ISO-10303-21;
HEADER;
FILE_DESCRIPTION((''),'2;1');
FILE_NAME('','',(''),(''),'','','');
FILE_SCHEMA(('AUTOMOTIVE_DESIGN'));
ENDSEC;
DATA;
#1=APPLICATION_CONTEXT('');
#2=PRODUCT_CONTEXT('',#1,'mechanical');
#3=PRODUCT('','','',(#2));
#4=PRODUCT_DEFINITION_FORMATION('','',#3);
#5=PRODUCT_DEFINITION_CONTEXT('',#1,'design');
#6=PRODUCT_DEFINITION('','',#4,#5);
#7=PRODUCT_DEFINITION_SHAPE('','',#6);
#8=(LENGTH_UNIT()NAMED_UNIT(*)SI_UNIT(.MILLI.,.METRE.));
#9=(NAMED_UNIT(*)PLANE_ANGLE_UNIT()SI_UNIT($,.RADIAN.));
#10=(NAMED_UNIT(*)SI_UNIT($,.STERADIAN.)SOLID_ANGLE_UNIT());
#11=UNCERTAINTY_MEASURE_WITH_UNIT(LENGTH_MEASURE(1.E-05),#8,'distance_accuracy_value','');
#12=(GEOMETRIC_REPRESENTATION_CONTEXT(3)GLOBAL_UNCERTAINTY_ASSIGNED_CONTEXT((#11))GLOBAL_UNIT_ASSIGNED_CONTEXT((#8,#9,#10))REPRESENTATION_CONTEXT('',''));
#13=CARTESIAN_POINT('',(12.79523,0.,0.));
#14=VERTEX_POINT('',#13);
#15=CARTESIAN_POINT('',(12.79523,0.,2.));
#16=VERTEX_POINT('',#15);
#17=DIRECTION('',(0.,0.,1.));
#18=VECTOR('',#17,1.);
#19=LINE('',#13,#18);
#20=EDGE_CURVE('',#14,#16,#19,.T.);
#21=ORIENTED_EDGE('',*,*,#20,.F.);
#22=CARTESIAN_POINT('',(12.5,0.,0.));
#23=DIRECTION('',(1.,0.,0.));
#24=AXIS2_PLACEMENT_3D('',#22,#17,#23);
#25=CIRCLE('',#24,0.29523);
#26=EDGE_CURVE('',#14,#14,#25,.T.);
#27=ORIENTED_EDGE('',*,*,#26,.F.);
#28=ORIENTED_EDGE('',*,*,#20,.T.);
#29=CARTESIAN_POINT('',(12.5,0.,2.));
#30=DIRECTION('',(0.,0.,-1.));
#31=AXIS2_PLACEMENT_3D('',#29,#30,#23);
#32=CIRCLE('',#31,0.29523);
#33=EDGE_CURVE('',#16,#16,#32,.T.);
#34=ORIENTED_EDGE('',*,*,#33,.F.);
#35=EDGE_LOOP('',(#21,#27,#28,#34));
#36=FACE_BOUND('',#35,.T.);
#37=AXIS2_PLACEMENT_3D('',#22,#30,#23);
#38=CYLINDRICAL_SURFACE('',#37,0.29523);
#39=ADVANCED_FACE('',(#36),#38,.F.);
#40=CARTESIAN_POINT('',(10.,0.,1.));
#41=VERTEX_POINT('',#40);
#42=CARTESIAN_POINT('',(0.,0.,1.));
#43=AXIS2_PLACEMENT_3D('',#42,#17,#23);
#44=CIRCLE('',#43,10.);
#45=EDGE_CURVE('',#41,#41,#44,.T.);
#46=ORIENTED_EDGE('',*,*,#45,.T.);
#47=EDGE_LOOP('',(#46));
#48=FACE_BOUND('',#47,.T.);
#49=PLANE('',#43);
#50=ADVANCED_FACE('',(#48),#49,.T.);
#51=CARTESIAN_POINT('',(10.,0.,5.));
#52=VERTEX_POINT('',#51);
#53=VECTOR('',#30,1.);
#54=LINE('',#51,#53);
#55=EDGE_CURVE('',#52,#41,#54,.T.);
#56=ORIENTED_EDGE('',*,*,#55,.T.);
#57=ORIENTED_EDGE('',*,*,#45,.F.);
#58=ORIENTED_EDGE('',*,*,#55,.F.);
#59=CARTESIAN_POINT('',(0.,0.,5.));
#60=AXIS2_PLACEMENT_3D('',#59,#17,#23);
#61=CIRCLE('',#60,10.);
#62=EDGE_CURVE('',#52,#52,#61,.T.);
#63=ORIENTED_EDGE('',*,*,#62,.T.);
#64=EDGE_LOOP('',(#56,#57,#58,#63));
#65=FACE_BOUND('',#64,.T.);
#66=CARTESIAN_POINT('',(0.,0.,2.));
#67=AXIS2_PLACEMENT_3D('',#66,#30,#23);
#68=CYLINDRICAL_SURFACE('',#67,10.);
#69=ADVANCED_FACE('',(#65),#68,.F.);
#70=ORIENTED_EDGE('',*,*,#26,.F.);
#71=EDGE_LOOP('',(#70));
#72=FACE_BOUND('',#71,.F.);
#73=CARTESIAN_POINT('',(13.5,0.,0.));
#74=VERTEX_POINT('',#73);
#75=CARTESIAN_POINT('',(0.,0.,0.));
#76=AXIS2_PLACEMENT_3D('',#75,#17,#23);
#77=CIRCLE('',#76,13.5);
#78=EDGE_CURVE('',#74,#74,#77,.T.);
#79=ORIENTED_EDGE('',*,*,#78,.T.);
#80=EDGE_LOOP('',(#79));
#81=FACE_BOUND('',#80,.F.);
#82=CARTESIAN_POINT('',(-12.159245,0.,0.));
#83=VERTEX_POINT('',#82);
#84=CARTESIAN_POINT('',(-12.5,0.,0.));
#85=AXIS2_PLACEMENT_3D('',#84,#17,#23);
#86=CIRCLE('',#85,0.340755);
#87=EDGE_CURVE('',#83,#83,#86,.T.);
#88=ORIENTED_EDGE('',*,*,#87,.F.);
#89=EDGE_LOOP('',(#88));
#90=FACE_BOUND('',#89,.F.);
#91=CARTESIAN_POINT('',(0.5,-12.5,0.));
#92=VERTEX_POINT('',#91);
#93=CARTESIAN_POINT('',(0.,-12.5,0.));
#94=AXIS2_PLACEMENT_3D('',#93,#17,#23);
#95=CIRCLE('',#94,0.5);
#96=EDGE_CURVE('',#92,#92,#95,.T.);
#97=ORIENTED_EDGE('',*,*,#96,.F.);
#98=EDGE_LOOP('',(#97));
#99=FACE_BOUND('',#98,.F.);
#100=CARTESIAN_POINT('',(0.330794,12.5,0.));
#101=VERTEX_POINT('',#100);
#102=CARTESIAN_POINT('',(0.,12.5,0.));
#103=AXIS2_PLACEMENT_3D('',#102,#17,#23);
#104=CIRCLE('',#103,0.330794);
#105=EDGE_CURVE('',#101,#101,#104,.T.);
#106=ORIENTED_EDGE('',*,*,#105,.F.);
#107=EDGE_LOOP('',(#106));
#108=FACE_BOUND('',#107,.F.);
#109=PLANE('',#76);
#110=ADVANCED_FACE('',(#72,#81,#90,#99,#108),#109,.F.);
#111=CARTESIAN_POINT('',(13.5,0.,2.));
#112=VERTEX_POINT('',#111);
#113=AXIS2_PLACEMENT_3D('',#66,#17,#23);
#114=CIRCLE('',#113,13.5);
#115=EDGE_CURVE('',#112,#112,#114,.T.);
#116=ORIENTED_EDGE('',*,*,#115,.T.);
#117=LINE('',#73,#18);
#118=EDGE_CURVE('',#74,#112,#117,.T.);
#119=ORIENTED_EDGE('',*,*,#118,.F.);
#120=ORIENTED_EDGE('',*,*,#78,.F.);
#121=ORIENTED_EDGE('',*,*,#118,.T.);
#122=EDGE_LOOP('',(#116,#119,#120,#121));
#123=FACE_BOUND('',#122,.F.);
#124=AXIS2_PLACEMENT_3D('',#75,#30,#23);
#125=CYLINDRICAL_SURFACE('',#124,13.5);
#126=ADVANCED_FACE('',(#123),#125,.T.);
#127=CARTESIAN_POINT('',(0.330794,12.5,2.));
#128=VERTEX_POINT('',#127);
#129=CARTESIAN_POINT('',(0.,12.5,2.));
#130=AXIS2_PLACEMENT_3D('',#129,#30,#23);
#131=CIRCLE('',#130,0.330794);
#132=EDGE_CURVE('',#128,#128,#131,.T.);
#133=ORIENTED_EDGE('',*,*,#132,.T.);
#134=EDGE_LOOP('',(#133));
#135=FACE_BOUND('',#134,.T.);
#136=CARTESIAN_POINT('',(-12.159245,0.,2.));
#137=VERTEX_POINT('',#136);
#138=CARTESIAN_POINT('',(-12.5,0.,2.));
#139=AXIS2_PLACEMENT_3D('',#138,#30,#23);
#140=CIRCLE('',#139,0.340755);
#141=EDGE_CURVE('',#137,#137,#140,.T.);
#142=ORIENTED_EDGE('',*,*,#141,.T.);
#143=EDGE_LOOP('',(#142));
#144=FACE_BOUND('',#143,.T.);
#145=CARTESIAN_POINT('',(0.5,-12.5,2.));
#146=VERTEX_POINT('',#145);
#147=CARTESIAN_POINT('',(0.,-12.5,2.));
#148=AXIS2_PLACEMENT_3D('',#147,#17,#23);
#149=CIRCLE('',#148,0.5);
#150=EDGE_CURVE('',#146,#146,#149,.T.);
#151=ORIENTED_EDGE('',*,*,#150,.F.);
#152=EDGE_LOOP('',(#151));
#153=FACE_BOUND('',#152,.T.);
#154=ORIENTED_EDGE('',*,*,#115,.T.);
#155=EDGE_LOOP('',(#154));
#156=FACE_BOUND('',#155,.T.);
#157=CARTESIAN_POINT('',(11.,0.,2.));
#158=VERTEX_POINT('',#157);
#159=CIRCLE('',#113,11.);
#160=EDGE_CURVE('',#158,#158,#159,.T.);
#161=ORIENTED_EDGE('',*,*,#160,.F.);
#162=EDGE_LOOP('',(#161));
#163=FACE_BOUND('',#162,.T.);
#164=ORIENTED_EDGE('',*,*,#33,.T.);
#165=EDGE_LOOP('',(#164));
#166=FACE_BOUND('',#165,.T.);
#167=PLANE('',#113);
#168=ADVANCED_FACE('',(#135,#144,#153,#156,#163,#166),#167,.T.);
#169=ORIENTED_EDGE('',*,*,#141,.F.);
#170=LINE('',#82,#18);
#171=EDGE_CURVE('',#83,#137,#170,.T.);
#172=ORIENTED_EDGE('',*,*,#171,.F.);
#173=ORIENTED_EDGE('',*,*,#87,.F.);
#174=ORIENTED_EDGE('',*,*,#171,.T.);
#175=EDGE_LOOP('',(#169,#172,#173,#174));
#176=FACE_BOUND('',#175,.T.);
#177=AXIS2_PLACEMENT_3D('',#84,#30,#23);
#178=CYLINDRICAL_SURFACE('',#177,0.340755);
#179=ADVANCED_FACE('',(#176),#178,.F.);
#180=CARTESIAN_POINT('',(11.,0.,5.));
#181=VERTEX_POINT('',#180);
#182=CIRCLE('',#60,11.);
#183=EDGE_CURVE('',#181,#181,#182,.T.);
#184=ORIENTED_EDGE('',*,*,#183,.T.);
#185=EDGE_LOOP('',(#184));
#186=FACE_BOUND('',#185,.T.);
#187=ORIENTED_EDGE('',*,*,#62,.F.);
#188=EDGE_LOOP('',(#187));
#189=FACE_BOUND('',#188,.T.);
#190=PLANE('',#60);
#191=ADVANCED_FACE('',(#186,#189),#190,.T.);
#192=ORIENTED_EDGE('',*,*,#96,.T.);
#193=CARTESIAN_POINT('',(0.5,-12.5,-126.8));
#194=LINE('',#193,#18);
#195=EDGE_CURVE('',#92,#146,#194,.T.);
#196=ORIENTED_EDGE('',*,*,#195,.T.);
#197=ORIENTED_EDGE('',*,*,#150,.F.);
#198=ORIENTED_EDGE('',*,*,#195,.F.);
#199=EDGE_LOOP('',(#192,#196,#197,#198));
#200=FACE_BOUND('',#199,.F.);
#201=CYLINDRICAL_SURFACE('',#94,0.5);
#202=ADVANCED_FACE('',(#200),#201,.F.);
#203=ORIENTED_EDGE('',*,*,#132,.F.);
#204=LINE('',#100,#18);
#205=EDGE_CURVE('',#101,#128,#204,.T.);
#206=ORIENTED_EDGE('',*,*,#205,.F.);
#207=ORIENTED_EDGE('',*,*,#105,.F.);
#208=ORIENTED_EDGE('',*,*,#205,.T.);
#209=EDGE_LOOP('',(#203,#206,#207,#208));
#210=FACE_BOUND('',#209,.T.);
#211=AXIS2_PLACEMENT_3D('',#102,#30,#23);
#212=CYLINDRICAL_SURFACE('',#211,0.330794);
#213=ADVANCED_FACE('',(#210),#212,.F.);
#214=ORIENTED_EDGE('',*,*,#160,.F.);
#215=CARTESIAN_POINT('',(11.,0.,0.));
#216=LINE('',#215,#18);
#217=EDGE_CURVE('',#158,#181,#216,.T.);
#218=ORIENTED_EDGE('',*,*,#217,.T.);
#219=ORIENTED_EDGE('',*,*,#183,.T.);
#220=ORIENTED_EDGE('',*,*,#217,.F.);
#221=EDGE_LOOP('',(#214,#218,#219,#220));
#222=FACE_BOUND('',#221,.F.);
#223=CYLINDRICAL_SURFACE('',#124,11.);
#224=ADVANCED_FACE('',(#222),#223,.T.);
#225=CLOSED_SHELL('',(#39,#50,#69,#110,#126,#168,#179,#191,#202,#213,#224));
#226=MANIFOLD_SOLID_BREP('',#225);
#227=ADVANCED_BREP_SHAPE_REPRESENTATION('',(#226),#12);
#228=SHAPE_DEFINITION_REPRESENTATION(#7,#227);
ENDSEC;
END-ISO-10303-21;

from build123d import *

# Parameters (mm, degrees)
F0_R     = 11
F1_DEPTH = 5
F0_R_2   = 13.5
F2_DEPTH = 2
F3_T     = 1
F4_R     = 0.3407547834
F4_R_2   = 0.295229786
F4_R_3   = 0.330794191
F4_R_4   = 0.5
F5_DEPTH = 126.8


# Not quite as in the source:
# - a shell that OpenCascade refuses in one call is made with other operations: the cavity is built on its own and cut out


with BuildPart() as f1:
    # F0 (on Top) → F1 (new body)
    with BuildSketch(Plane.XY):
        Circle(F0_R)
    extrude(amount=F1_DEPTH)

    # F0 (on Top) → F2 (join)
    with BuildSketch(Plane.XY):
        Circle(F0_R_2)
        Circle(F0_R, mode=Mode.SUBTRACT)
    extrude(amount=F2_DEPTH)

    # F3: shell of thickness 1, made by hand


with BuildPart() as f3_core1:
    # F3_t2: copy of F1
    add(f1.part)

    # the walls: a layer under each face that stays
    f3_faces = [f3_core1.faces().sort_by_distance(p)[0] for p in [
        (-11, 0, 3.5),
        (-9, -9, 2),
        (-13.5, 0, 1),
        (0, 0, 0),
    ]]
    thicken(f3_faces, amount=-F3_T, mode=Mode.SUBTRACT)

    # F3_s3 → F3_t4 (revolve, cut)
    with BuildSketch(Plane.XZ):
        Polygon((11.01, 2.01), (10, 2), (10, 1), (11, 1), align=None)
    revolve(axis=Axis((0, 0, 2), (0, 0, 1)), mode=Mode.SUBTRACT)


with BuildPart() as f1_1:
    add(f1.part)

    # what is left inside the walls is the cavity
    f3_cavity = [f3_core1.part.solids().sort_by_distance(p)[0] for p in [
        (0, -3.333333, 1.01),
    ]]
    add(f3_cavity, mode=Mode.SUBTRACT)

    # F4 (on face) → F5 (cut, symmetric)
    with BuildSketch(Plane.XY):
        with Locations((-12.5, 0)):
            Circle(F4_R)
        with Locations((12.5, 0)):
            Circle(F4_R_2)
        with Locations((0, 12.5)):
            Circle(F4_R_3)
        with Locations((0, -12.5)):
            Circle(F4_R_4)
    extrude(amount=F5_DEPTH, both=True, mode=Mode.SUBTRACT)


solid = f1_1.part
